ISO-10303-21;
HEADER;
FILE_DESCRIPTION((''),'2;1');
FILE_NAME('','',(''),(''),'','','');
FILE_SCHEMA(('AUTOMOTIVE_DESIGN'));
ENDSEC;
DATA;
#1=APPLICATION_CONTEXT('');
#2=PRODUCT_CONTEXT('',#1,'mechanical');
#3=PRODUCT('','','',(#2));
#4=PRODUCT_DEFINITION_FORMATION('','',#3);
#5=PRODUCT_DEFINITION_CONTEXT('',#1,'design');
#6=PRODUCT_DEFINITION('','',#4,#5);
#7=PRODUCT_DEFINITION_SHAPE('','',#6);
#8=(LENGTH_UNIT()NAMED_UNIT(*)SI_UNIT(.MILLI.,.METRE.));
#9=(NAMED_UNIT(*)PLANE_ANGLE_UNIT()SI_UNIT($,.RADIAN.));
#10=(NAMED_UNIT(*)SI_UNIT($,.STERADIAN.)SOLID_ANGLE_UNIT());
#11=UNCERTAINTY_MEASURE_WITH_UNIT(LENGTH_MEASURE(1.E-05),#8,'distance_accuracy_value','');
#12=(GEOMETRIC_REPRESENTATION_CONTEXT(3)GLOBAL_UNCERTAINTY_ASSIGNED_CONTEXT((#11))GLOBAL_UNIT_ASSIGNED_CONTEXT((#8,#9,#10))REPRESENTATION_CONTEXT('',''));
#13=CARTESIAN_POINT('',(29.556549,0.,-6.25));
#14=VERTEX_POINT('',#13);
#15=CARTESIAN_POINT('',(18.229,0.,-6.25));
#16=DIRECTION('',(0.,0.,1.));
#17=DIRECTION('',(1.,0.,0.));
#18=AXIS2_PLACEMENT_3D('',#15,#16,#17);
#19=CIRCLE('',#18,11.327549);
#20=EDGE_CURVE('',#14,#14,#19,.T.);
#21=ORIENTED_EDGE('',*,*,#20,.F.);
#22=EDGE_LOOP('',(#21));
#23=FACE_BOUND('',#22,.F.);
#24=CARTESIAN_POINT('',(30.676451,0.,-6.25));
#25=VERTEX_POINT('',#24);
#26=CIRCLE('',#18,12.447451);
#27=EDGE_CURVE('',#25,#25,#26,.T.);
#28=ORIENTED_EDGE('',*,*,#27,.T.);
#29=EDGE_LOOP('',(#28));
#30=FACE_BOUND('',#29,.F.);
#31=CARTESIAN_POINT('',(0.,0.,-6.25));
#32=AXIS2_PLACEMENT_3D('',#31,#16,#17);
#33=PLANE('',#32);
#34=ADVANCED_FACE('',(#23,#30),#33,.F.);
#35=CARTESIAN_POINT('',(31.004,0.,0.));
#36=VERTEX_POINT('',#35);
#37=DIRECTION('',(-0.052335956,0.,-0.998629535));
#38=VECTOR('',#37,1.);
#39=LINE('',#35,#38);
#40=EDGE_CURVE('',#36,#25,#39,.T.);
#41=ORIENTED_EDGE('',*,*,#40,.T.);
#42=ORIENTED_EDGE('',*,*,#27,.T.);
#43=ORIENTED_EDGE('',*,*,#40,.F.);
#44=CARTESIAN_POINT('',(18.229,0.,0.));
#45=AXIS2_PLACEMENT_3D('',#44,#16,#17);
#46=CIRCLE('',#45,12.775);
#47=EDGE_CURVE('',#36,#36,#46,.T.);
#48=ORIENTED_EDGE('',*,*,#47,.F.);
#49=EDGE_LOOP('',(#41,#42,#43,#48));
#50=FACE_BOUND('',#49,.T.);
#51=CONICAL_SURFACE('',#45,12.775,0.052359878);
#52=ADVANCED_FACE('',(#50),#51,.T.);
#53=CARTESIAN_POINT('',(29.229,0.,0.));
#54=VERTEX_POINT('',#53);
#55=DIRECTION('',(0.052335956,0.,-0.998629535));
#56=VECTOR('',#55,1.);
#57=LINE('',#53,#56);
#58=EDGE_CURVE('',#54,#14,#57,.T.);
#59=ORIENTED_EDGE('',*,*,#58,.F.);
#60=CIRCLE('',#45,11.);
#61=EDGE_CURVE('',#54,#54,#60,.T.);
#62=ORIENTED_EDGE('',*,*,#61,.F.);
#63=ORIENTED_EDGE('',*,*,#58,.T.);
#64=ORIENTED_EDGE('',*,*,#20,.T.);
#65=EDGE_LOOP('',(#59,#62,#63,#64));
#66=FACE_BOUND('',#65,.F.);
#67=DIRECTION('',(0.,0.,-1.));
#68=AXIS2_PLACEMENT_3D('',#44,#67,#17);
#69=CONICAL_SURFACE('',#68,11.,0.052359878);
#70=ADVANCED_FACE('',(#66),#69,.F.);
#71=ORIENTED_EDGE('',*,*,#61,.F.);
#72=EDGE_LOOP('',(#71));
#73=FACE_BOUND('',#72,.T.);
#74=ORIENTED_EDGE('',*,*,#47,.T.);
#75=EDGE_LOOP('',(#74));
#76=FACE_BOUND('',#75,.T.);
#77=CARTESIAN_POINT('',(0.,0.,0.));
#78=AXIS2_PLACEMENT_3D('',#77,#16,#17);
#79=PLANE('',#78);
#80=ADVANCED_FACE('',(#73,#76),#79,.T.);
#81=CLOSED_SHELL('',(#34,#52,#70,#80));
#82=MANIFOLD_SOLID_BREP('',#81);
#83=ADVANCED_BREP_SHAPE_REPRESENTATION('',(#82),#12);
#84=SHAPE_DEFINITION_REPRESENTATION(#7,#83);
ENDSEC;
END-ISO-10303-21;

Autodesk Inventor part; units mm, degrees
ref_plane "YZ Plane" through (0, 0, 0) normal (1, 0, 0) x (0, 1, 0)
ref_plane "XZ Plane" through (0, 0, 0) normal (0, 1, 0) x (-1, 0, 0)
ref_plane "Arbeitsebene1" through (0, 0, 0) normal (0, 0, 1) x (1, 0, 0)
sketch "Skizze1" plane through (0, 0, 0) normal (0, 0, 1) x (1, 0, 0)
  circle A0 centre (18.229, 0) radius 12.775 projected
  arc A1 (-21.8552, 14.25) -> (-23.8552, 12.25) centre (-21.8552, 12.25) ccw projected
  line L0 (-23.8552, 12.25) -> (-23.8552, -12.25) projected
  arc A2 (-23.8552, -12.25) -> (-21.8552, -14.25) centre (-21.8552, -12.25) ccw projected
  line L1 (-21.8552, -14.25) -> (18.229, -14.25) projected
  arc A3 (18.229, -14.25) -> (18.229, 14.25) centre (18.229, 0) ccw projected
  line L2 (18.229, 14.25) -> (-21.8552, 14.25) projected
  circle A4 centre (18.229, 0) radius 11
  point P0 (0, 0)
  dimension "d0" = 22
ref_plane "Arbeitsebene2" through (5.454, -12.775, -6.25) normal (0, 0, 1) x (1, 0, 0)
extrude "Extrusion1" add sketch "Skizze1" against normal up to surface (6.25 mm away) draft -3 contours A0
properties part number "10_Filteslide_25mm_insert"
